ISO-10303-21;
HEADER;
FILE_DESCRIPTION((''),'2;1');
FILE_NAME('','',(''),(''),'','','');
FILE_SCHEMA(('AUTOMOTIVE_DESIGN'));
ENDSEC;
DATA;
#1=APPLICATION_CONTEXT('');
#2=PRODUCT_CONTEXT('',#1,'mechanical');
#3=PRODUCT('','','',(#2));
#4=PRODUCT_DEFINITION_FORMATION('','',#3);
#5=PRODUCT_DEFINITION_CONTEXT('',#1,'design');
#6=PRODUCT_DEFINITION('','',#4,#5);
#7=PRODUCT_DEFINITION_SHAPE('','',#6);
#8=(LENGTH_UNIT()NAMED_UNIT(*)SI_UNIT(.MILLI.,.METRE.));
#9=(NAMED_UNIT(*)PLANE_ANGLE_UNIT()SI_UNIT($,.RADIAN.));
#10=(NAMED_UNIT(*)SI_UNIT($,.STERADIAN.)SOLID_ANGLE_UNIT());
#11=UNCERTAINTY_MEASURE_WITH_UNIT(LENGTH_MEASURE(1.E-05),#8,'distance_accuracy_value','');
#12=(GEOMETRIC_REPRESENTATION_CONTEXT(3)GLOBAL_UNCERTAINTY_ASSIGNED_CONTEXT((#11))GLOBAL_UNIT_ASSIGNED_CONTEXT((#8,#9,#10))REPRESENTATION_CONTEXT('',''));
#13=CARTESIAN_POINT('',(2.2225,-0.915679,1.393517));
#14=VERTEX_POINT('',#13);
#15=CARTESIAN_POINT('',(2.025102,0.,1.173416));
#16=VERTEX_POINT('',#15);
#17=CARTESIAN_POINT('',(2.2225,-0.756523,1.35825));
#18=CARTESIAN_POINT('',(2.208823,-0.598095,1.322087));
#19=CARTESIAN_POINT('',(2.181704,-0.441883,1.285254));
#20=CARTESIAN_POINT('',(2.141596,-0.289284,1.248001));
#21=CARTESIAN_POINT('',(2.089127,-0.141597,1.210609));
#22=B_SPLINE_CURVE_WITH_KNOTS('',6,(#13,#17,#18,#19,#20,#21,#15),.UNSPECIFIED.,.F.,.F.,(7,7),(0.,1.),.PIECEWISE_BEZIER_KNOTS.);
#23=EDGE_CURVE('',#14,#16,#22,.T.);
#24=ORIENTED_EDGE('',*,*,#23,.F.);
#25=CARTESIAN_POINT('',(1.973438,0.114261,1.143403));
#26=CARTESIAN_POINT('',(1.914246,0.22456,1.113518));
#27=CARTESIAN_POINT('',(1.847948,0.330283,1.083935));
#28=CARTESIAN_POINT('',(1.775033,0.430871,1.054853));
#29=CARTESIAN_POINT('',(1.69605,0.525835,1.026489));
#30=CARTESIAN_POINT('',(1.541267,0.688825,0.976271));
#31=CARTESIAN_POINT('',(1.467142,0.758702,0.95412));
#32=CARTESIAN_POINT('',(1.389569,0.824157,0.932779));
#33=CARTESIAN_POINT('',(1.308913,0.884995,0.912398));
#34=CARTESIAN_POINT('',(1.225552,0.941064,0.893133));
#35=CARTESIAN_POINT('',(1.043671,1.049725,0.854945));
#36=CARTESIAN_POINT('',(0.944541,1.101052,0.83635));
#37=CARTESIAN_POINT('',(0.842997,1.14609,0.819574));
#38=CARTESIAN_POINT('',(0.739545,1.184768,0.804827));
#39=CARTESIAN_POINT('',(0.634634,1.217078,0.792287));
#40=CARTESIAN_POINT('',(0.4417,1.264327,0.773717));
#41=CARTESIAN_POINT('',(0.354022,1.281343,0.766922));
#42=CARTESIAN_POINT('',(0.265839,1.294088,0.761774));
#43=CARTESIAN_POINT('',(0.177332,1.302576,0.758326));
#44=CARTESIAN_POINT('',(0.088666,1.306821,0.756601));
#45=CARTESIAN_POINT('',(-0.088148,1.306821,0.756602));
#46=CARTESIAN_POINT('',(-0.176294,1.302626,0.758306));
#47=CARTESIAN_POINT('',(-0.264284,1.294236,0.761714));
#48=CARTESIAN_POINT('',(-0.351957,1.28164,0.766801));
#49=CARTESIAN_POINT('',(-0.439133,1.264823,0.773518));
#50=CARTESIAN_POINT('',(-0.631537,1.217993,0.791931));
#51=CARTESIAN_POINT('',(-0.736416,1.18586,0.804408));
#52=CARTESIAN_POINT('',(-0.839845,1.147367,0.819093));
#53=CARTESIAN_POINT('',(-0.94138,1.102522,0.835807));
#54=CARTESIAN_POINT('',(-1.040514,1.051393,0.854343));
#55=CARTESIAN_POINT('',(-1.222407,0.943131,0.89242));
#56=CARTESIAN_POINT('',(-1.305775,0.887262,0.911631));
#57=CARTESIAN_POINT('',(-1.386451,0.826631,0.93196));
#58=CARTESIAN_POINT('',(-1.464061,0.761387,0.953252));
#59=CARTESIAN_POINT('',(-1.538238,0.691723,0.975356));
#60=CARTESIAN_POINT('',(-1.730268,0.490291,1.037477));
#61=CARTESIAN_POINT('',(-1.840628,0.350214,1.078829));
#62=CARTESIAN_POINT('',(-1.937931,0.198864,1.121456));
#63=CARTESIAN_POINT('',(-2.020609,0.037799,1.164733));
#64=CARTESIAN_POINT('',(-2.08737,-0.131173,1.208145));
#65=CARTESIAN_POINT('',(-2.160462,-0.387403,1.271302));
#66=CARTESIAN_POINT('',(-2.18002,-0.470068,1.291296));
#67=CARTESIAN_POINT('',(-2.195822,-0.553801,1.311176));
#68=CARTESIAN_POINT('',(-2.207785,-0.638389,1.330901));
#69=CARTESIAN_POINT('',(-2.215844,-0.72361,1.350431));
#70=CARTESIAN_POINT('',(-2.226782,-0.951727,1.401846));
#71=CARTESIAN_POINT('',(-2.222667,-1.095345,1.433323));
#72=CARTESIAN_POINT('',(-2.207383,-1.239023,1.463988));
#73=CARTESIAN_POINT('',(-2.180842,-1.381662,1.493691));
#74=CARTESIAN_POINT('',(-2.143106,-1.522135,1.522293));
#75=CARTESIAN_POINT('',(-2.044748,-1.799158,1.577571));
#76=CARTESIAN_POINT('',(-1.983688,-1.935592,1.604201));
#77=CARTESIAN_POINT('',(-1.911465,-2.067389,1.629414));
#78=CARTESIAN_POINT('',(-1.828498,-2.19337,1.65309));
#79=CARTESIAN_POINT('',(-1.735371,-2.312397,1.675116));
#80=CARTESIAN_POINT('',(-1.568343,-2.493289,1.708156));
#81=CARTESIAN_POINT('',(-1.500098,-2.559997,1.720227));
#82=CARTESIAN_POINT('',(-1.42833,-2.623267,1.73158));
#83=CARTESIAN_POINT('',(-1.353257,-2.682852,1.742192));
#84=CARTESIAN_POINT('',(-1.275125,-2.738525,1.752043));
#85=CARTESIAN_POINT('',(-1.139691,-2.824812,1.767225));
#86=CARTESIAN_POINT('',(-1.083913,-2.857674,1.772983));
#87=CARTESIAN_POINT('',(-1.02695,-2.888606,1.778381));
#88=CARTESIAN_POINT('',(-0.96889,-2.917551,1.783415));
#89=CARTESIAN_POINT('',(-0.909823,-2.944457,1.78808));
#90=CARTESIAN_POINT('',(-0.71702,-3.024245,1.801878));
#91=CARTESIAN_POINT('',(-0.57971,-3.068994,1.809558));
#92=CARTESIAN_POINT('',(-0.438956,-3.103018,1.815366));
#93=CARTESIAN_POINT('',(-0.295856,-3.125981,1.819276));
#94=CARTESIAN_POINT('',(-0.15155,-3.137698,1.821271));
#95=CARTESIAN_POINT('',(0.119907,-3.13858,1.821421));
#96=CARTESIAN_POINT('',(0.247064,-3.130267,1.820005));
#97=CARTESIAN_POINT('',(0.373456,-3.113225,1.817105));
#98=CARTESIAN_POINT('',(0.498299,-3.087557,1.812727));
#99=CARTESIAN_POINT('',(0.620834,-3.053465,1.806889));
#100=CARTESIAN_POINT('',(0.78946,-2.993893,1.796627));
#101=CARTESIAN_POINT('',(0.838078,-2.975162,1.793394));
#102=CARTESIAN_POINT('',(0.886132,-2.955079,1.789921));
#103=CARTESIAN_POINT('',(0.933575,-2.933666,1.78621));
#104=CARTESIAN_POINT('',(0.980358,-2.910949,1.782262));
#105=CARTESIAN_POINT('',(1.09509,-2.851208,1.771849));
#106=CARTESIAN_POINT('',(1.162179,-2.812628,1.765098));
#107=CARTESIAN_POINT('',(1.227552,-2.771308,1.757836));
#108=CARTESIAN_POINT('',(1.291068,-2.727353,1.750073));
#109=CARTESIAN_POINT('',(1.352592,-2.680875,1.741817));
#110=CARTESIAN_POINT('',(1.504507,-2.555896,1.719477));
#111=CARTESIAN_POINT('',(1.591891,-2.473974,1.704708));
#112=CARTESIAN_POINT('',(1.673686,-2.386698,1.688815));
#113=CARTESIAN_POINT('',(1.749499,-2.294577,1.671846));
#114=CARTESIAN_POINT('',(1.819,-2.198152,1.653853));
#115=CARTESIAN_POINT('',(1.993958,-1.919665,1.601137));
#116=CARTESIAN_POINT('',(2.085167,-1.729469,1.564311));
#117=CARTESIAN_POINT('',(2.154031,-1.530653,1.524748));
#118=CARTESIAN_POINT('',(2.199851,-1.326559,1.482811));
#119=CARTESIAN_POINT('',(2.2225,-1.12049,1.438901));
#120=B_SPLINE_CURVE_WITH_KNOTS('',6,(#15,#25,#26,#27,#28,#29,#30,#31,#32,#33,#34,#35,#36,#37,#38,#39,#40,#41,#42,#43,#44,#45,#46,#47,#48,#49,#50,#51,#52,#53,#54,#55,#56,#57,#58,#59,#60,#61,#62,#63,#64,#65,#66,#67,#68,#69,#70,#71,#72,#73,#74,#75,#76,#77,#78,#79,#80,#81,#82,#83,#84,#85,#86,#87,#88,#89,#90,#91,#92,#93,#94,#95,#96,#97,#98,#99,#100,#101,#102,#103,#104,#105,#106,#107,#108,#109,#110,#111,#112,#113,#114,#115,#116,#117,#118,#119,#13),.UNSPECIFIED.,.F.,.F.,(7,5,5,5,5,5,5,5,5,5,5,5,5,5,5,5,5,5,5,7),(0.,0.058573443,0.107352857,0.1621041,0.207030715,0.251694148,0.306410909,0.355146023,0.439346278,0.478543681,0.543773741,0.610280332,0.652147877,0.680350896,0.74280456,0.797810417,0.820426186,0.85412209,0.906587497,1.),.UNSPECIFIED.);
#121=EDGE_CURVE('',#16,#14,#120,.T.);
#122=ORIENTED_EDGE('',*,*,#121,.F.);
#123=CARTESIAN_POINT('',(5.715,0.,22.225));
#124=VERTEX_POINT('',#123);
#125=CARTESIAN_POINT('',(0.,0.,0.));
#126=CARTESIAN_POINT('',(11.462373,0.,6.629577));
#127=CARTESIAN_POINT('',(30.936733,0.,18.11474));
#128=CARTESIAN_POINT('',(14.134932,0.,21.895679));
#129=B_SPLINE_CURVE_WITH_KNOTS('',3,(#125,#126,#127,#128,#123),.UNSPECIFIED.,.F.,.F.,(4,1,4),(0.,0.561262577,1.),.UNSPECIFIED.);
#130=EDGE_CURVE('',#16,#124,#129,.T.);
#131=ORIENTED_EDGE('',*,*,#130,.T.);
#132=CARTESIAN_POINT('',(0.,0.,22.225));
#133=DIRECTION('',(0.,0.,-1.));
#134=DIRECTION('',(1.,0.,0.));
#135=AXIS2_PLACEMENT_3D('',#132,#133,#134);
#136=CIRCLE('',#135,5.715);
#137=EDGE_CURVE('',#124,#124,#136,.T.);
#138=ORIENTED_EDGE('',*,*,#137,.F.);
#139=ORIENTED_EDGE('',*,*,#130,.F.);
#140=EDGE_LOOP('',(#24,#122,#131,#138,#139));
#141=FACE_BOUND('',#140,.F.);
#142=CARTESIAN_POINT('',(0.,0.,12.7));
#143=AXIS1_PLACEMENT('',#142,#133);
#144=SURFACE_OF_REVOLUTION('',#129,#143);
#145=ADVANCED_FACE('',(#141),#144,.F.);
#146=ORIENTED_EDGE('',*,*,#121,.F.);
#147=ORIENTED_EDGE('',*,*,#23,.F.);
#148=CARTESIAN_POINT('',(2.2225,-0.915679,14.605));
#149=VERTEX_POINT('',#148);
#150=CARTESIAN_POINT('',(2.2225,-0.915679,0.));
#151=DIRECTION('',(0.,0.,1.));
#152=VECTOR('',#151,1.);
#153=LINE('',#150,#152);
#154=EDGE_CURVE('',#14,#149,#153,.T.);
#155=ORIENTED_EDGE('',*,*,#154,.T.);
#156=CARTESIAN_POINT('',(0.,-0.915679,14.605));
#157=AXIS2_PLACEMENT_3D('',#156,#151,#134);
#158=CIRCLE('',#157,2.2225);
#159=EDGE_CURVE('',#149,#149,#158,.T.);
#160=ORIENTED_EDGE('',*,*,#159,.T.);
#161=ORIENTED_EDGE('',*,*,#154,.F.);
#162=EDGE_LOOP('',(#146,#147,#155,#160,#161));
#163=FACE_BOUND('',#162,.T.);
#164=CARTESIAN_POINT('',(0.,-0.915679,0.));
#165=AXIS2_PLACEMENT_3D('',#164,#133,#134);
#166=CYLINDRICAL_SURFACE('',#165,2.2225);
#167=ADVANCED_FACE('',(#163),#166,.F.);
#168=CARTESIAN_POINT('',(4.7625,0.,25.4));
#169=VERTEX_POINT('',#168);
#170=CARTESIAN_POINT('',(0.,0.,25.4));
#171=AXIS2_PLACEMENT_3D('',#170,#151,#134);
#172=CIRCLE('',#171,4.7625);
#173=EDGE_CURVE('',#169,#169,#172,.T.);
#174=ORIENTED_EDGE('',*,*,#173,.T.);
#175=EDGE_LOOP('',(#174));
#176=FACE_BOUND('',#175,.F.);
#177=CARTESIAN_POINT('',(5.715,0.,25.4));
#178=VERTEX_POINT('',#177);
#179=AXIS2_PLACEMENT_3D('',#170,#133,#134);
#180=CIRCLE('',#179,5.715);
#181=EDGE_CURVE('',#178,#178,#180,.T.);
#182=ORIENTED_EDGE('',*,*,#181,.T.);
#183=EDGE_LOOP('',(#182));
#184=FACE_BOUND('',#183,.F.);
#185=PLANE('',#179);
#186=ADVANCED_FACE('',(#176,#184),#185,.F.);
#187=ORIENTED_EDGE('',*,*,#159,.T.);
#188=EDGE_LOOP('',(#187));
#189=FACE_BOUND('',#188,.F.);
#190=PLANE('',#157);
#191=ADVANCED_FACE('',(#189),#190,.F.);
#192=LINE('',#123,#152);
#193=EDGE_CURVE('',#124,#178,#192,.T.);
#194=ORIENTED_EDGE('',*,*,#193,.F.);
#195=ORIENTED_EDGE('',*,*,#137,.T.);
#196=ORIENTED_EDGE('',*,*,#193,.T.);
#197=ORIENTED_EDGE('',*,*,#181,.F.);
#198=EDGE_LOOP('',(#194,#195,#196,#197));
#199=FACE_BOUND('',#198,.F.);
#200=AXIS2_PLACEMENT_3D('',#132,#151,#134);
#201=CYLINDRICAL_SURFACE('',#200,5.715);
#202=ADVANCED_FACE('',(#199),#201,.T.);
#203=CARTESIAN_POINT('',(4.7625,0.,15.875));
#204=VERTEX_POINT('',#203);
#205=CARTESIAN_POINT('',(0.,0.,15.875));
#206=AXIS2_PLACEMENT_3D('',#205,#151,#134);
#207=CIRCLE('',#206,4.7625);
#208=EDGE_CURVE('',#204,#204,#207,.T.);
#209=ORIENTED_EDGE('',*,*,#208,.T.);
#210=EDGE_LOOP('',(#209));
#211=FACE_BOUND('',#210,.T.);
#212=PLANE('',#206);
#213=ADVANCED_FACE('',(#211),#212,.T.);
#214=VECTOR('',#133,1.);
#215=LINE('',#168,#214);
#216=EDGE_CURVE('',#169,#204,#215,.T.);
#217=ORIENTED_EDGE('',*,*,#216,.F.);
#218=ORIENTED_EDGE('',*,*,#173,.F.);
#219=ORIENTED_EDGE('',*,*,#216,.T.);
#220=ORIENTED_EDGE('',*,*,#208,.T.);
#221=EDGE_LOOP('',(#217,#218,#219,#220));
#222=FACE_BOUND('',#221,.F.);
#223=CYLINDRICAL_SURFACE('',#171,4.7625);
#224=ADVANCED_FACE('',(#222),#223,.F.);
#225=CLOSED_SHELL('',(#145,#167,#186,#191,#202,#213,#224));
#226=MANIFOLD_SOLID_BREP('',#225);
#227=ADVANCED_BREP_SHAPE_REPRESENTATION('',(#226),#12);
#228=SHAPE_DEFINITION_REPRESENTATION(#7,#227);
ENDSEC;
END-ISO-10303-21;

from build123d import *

# Parameters (mm, degrees)
F2_R     = 4.7625
F3_DEPTH = 9.525
F4_R     = 2.2225
F5_DEPTH = 14.605


# Not quite as in the source:
# - a feature names something its author has since deleted; it is built from what else it names


with BuildPart() as f1:
    # F0 (on Front) → F1 (revolve)
    with BuildSketch(Plane.XZ):
        with BuildLine():
            Line((0, 25.4), (0, 0))
            add(Edge.make_bspline(
                [(0, 0), (11.4623733169, 6.6295765693), (30.9367325307, 18.1147399727), (14.1349324056, 21.8956786186), (5.715, 22.225)],
                knots=[0, 0, 0, 0, 0.5612625766, 1, 1, 1, 1], degree=3))
            Line((5.715, 22.225), (5.715, 25.4))
            Line((5.715, 25.4), (0, 25.4))
        make_face()
    revolve(axis=Axis((0, 0, 12.7), (0, 0, -1)))

    # F2 (on face) → F3 (cut)
    with BuildSketch(Plane.XY.offset(25.4)):
        Circle(F2_R)
    extrude(amount=-F3_DEPTH, mode=Mode.SUBTRACT)

    # F4 (on Top) → F5 (cut)
    with BuildSketch(Plane.XY):
        with Locations((0, -0.9156785202)):
            Circle(F4_R)
    extrude(amount=F5_DEPTH, mode=Mode.SUBTRACT)


solid = f1.part
